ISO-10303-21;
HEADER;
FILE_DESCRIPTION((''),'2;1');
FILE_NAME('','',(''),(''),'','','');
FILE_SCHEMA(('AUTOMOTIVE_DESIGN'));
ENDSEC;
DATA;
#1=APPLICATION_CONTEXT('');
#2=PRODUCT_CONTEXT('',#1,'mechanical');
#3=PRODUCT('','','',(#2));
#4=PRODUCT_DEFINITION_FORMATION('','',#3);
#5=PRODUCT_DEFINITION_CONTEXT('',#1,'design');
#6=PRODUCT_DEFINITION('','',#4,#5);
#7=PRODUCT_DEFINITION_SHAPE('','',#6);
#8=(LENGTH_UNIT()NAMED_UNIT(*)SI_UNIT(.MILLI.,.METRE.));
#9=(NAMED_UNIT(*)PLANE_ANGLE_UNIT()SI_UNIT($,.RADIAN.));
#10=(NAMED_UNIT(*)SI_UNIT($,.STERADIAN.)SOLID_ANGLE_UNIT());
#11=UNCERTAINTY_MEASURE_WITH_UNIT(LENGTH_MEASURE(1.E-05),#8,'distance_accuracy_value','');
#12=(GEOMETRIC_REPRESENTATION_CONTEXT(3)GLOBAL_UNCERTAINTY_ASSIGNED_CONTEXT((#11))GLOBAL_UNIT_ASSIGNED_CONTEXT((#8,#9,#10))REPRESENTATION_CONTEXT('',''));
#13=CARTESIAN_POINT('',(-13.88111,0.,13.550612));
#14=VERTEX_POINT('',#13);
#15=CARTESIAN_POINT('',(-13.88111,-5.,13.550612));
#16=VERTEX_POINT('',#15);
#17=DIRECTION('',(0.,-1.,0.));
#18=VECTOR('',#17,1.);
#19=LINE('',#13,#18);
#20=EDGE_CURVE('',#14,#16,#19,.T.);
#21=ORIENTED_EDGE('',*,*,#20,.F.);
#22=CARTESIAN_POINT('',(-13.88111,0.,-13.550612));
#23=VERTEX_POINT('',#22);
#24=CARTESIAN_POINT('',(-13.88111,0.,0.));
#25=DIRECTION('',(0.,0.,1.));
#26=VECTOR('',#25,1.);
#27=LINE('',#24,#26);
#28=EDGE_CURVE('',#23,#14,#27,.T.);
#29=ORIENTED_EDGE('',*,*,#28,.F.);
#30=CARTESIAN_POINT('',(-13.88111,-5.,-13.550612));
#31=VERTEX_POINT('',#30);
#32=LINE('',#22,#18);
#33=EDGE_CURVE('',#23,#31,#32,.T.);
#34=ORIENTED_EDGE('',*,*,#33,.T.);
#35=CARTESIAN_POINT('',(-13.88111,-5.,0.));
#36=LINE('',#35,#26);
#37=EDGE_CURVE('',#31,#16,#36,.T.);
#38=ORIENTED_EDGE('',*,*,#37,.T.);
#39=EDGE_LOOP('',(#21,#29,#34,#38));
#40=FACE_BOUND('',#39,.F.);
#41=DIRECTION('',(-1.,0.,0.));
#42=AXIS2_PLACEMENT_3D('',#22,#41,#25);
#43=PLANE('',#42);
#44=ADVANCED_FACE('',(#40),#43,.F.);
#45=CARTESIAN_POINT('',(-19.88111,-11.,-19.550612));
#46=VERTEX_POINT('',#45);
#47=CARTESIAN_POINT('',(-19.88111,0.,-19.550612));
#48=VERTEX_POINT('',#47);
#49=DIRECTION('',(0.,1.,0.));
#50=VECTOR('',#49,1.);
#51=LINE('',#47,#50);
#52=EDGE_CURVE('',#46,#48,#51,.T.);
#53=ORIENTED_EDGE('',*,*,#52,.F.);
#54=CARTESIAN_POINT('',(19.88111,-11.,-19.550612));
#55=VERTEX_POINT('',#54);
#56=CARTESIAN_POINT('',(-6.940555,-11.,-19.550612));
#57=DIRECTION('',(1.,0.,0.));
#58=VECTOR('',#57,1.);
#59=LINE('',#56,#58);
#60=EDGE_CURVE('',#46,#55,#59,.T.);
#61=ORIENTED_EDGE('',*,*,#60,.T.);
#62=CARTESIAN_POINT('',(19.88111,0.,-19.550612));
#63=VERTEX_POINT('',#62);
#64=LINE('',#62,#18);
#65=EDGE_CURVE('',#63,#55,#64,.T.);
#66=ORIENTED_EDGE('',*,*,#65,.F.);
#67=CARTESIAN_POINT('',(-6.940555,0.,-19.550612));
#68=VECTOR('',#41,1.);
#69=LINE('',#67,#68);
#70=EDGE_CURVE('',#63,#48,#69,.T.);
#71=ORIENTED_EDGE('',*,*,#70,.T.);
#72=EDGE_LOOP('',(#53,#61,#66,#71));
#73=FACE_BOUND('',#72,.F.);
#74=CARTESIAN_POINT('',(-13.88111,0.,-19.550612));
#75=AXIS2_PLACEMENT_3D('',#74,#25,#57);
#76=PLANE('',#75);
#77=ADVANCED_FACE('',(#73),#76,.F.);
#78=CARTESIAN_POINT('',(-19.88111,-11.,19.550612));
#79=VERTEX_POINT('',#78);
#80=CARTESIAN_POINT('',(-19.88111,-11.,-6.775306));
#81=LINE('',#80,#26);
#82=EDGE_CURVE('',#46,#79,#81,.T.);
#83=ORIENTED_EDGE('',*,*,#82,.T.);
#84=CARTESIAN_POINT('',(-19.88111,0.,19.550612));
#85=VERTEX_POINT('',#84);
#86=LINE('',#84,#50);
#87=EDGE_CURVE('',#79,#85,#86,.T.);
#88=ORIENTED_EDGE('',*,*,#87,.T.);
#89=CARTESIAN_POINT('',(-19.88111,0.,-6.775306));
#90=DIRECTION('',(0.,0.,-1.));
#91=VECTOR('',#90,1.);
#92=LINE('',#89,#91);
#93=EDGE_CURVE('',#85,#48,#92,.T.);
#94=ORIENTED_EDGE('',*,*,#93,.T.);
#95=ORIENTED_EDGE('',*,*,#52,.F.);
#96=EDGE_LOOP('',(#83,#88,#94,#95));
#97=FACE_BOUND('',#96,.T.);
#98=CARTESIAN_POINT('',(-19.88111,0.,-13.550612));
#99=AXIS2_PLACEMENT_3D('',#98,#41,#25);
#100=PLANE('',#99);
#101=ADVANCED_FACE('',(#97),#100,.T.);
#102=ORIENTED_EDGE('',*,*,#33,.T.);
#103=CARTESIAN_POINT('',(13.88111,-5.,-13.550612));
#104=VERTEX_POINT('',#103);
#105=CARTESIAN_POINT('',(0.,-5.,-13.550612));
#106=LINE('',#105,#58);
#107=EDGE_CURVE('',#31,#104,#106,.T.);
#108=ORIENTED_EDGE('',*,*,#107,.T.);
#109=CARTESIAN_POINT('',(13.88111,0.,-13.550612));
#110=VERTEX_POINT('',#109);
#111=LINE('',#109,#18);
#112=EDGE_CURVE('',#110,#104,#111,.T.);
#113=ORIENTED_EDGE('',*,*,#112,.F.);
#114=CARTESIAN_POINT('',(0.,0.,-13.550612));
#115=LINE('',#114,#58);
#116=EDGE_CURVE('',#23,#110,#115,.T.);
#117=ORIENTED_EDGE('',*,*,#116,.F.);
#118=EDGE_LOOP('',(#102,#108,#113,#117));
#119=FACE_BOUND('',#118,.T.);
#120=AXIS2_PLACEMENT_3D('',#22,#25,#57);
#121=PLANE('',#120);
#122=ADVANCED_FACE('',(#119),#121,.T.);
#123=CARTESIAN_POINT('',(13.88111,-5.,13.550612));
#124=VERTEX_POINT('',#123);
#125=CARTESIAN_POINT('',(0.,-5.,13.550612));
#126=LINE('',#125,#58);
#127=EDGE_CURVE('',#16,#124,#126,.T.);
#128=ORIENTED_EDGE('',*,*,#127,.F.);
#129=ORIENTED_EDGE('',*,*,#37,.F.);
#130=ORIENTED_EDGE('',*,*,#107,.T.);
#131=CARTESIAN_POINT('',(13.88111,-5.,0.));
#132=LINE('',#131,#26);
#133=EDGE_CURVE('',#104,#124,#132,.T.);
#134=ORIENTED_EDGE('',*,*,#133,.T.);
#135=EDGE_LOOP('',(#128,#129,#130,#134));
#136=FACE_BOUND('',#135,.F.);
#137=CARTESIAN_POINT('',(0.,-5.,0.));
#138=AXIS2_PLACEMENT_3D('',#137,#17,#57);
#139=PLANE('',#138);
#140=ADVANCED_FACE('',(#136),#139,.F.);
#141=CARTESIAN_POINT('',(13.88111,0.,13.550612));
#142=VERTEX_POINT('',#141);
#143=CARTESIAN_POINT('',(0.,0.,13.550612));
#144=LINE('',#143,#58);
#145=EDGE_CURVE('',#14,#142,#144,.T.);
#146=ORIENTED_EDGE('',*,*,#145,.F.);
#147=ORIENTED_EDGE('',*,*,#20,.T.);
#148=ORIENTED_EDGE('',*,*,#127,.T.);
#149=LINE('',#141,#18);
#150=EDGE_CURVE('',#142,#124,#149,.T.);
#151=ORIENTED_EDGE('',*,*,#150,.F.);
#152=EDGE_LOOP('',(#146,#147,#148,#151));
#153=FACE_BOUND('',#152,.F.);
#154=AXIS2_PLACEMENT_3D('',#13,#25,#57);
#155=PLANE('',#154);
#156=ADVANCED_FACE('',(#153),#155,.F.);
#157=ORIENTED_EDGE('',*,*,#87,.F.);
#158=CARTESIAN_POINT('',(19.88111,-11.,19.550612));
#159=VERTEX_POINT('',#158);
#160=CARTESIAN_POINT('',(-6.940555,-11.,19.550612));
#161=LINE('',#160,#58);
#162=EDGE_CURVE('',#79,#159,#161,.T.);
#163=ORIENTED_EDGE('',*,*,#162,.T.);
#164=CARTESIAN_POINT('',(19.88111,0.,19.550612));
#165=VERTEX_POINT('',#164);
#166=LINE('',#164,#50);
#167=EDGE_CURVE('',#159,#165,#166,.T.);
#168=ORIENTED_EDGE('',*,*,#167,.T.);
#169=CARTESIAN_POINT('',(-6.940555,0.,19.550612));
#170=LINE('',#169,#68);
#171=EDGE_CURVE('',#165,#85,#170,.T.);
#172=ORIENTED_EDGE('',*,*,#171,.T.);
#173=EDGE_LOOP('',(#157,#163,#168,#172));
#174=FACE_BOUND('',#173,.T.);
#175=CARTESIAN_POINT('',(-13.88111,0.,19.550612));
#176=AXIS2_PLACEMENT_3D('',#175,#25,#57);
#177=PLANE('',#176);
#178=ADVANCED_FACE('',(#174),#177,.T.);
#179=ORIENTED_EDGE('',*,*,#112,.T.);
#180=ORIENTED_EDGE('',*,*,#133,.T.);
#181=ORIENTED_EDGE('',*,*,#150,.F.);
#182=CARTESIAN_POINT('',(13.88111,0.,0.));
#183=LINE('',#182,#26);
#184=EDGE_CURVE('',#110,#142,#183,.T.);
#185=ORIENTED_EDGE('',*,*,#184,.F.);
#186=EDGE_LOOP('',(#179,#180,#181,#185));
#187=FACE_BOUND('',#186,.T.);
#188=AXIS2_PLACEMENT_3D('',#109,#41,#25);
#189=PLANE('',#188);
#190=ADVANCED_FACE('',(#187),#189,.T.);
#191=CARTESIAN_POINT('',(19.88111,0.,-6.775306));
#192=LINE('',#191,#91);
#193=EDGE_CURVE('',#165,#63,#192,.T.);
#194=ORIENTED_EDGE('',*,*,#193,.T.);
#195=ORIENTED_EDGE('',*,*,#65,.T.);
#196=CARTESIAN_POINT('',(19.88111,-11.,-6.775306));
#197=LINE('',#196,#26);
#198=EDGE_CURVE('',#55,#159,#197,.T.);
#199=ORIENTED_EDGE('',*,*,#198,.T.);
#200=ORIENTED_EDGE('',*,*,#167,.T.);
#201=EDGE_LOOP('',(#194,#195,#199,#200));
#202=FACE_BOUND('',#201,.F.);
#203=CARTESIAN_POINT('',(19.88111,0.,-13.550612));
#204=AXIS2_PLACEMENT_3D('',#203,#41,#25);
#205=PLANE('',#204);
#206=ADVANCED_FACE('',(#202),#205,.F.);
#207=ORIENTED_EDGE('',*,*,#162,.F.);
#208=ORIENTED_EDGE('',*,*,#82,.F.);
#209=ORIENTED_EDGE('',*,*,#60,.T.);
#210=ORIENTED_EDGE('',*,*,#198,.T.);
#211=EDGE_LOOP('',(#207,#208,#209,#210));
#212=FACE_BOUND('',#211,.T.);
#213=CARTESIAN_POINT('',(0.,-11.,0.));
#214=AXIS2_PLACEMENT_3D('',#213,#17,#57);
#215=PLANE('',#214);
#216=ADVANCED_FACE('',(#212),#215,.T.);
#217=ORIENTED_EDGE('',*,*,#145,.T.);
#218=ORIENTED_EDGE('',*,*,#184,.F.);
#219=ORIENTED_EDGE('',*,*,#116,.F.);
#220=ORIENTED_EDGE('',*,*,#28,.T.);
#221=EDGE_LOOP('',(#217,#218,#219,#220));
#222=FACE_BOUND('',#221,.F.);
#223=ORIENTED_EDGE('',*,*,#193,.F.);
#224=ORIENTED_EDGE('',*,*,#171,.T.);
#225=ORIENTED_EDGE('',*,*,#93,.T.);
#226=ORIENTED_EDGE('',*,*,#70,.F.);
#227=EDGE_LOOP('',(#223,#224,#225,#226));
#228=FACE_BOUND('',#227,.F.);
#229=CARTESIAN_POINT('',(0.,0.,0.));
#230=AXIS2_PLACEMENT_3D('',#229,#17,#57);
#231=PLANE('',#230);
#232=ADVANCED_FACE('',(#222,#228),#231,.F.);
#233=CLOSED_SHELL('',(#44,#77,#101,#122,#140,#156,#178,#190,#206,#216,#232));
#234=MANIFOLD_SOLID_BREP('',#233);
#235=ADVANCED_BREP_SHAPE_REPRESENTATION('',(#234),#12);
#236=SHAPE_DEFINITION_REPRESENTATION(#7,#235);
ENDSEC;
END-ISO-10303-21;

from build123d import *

# Parameters (mm, degrees)
F0_W     = 27.7622193098
F0_H     = 27.1012242883
F1_DEPTH = 5
F3_T     = 6


# Not quite as in the source:
# - a feature of the source that left no trace in its solid (it failed there, or was rolled back) is left out


with BuildPart() as f1:
    # F0 (on Front) → F1 (new body)
    with BuildSketch(Plane.XZ):
        Rectangle(F0_W, F0_H)
    extrude(amount=F1_DEPTH)

    # F3
    f3_openings = [f1.faces().sort_by_distance(p)[0] for p in [
        (0, 0, 0),
    ]]
    offset(amount=F3_T, openings=f3_openings, kind=Kind.INTERSECTION)


solid = f1.part
